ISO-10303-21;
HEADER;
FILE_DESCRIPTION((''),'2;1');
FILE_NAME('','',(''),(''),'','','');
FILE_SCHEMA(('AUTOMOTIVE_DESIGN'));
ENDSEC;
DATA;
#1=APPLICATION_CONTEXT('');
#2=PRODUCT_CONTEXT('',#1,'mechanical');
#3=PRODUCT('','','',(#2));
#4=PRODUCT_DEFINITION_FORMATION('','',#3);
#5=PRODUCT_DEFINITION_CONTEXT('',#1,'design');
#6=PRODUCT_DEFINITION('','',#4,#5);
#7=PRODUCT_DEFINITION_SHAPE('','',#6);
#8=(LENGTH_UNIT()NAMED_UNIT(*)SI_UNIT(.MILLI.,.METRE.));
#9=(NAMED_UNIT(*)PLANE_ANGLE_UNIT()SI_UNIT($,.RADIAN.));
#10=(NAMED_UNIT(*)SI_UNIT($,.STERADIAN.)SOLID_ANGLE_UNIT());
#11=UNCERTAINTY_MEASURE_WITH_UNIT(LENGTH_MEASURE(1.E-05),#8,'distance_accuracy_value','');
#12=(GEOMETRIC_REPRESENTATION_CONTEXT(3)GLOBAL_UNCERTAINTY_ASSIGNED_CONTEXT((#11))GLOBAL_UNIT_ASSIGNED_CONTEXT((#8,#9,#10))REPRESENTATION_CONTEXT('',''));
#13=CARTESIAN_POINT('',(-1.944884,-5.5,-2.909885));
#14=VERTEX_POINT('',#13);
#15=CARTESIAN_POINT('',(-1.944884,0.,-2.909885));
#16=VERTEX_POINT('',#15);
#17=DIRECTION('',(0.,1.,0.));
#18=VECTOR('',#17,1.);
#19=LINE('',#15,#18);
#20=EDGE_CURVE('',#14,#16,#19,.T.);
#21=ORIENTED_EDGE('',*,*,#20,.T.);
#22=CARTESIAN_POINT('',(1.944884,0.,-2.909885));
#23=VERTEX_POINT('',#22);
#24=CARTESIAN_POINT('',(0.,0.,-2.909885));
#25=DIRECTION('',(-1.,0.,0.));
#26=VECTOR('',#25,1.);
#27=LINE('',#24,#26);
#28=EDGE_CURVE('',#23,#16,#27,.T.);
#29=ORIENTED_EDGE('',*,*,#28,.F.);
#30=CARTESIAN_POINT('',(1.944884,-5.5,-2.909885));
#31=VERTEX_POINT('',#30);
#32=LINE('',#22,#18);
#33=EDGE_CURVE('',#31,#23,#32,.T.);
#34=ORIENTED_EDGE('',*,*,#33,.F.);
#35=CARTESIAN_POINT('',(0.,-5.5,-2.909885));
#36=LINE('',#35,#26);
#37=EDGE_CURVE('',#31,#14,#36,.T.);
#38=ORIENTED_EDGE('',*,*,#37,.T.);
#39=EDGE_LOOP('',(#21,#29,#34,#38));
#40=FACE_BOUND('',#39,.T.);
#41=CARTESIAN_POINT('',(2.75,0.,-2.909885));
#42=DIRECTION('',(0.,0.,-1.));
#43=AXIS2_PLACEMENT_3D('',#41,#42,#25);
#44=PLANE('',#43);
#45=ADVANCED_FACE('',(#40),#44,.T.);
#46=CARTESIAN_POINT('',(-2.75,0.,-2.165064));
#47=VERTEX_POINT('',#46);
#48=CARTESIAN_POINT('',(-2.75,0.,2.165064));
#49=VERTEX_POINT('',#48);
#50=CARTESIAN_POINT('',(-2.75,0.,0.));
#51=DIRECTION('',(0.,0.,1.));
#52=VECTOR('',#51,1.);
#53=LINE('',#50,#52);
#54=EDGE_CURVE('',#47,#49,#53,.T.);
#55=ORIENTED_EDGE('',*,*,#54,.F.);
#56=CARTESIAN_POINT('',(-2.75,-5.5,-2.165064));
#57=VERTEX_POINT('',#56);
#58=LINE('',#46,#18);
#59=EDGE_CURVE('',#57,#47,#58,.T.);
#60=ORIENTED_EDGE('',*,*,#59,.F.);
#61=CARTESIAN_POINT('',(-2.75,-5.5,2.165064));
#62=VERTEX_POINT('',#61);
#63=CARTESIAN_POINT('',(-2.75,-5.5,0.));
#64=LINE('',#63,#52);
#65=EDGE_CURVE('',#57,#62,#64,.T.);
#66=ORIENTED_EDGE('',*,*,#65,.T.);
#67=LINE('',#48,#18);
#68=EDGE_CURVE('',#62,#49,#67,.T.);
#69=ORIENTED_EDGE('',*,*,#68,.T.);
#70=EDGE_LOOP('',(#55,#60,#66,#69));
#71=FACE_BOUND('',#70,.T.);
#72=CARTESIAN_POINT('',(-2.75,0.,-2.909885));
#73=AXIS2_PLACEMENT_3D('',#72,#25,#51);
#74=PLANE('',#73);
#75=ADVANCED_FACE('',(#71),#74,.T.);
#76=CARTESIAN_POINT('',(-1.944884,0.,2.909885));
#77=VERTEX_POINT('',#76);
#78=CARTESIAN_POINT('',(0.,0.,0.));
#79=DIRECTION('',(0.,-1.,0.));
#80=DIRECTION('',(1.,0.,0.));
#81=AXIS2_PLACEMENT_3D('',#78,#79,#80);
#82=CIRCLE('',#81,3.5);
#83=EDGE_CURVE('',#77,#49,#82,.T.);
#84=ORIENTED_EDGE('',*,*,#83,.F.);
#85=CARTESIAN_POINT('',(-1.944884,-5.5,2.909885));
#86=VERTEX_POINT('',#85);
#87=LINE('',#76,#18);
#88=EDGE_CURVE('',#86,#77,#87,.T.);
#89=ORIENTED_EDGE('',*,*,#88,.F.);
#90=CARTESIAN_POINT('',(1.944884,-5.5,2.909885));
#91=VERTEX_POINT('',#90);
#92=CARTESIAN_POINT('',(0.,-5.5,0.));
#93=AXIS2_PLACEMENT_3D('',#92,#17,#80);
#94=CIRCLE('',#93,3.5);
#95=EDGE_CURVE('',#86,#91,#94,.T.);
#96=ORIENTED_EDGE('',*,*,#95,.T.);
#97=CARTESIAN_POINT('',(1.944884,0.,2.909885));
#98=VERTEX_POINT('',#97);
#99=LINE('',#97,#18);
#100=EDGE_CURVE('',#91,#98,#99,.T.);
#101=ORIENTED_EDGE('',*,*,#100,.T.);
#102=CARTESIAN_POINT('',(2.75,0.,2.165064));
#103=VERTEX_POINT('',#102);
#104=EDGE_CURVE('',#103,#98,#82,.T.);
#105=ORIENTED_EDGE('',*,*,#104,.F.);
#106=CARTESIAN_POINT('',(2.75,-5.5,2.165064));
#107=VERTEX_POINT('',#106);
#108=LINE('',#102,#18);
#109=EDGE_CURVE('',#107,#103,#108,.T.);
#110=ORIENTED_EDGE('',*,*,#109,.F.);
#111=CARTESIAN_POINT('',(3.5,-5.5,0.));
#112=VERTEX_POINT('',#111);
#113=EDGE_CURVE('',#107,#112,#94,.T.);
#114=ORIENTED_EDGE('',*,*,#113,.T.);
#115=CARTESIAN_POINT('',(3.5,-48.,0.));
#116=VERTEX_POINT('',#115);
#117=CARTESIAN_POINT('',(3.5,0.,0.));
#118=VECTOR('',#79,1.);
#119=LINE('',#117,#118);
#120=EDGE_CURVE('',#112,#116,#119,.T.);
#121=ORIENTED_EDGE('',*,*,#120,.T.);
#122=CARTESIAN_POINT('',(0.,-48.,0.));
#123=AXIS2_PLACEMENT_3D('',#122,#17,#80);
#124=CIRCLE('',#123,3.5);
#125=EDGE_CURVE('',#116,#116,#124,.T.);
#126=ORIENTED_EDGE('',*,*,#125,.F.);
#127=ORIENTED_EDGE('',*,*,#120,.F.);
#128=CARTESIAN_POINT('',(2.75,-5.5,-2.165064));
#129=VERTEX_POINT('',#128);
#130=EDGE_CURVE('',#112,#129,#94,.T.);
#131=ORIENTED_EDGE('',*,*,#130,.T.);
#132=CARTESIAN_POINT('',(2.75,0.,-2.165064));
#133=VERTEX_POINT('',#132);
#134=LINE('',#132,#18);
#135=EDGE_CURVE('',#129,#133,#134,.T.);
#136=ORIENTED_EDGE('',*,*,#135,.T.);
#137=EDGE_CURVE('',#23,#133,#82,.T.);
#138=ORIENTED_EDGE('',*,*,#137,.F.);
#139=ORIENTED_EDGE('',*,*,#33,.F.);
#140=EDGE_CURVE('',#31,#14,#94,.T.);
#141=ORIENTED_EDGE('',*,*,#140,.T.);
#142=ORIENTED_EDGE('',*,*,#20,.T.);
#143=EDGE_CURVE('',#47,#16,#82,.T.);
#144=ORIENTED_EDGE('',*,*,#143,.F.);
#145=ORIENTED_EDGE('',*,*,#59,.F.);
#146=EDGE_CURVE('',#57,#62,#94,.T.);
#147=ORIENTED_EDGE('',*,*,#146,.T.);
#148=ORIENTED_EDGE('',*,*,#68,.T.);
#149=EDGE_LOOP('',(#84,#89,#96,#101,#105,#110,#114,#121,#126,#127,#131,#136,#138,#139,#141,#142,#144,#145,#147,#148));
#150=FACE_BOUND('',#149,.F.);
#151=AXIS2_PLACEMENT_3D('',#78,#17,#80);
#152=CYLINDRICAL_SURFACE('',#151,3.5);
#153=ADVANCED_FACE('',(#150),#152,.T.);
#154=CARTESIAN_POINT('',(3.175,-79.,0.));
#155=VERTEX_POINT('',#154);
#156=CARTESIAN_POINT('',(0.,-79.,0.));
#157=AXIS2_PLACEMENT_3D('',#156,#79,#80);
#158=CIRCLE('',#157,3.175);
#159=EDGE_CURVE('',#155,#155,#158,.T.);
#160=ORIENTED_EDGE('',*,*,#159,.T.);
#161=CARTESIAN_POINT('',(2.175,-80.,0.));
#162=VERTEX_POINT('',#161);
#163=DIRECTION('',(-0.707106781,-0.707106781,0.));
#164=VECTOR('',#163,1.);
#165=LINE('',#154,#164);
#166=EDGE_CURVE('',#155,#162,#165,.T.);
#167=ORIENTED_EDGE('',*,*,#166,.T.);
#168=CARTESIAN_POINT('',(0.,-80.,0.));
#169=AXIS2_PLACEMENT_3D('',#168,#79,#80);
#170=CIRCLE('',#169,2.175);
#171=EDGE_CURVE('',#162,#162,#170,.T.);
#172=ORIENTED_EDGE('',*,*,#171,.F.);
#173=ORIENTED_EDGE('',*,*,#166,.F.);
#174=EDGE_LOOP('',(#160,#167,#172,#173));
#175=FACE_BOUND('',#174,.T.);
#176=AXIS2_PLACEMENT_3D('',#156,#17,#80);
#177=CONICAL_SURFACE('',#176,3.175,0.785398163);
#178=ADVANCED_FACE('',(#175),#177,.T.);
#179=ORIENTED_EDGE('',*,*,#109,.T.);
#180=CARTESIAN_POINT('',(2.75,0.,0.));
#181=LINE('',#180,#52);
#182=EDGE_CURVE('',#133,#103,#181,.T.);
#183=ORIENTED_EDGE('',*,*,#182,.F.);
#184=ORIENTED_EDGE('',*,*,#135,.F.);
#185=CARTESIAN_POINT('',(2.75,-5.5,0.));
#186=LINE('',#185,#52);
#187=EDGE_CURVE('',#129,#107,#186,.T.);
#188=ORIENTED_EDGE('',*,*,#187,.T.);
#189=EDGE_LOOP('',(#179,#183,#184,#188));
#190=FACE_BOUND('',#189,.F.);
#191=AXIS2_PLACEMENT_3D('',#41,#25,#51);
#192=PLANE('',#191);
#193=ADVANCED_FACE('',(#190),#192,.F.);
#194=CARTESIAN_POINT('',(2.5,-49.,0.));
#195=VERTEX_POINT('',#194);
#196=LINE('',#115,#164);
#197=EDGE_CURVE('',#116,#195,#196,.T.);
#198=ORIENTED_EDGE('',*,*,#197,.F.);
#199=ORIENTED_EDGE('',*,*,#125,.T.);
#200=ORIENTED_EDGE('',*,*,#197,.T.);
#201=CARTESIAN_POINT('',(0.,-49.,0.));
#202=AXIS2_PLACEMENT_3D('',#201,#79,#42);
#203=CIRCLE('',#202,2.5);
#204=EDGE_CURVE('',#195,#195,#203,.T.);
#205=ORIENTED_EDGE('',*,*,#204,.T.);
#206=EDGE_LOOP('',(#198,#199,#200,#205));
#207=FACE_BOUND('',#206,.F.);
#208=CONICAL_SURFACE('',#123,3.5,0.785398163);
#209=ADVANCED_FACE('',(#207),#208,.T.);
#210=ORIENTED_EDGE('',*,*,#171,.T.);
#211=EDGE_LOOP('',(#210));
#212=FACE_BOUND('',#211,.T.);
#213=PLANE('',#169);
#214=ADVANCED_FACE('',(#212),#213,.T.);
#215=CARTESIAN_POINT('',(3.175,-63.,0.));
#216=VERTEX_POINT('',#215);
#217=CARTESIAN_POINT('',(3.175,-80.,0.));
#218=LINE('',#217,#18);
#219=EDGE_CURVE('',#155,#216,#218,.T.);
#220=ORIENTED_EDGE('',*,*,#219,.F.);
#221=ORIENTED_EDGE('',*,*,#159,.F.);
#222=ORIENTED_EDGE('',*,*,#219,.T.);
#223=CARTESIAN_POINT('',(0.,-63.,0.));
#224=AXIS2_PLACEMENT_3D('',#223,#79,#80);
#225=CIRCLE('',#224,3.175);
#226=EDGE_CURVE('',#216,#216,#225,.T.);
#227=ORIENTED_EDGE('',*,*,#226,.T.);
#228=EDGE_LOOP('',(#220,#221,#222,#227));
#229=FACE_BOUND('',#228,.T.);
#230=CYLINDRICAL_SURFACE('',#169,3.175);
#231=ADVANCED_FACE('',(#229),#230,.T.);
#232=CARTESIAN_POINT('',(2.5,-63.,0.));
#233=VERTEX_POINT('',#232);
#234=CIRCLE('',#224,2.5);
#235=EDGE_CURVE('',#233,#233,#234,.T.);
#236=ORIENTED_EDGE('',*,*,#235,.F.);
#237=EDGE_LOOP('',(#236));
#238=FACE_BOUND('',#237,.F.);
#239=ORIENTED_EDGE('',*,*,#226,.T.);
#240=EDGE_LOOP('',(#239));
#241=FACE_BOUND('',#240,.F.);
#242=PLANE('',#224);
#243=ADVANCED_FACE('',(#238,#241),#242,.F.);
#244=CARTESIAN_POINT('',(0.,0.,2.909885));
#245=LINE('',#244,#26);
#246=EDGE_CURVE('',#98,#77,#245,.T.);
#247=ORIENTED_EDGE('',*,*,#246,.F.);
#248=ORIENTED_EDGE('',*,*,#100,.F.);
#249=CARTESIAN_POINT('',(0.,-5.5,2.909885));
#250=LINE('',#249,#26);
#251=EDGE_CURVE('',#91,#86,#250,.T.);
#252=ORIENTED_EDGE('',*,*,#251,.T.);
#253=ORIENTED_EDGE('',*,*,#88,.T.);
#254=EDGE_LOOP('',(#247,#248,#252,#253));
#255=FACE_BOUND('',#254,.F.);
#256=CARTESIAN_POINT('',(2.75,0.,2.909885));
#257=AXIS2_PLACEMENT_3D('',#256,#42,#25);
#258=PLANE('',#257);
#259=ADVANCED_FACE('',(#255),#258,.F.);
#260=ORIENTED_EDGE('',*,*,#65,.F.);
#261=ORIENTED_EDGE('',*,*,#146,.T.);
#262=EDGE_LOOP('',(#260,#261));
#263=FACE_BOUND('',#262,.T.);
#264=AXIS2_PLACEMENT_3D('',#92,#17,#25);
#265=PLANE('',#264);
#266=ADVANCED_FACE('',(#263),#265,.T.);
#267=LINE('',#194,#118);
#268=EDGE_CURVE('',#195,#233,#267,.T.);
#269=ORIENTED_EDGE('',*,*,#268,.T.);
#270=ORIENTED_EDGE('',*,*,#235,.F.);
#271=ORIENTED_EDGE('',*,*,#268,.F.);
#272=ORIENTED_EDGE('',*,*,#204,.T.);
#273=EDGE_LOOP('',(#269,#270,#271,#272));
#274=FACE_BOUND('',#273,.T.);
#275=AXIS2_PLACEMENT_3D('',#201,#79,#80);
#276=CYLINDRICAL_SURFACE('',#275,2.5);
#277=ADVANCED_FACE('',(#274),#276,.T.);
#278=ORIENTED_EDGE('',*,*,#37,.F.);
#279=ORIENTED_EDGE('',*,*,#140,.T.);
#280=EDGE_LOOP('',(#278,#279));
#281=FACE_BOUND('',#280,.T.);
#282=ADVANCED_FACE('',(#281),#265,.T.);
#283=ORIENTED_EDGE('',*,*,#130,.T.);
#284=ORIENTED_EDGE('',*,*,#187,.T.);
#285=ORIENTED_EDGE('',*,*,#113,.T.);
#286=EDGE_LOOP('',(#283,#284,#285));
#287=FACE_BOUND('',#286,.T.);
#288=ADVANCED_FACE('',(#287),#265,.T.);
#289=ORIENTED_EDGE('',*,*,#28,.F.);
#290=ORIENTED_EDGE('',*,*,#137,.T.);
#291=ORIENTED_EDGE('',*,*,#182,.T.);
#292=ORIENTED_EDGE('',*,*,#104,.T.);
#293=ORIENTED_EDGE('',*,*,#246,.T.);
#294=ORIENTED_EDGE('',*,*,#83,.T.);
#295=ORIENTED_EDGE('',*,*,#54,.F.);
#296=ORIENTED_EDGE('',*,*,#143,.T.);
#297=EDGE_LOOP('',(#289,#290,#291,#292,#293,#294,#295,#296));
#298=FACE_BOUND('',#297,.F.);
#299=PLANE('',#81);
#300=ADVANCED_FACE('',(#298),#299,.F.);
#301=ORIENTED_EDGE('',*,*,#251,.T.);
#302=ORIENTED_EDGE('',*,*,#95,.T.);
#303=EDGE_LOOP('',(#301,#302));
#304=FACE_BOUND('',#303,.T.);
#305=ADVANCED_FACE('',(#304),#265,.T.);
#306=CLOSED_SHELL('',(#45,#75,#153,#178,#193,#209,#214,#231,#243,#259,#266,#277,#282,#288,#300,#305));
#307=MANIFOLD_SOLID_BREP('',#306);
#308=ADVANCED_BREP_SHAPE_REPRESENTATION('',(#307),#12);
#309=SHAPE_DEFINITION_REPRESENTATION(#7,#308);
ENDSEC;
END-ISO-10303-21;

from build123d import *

# Parameters (mm, degrees)
F0_R        = 3.5
F1_DEPTH    = 80
F2_R        = 6.3298520118
F2_R_2      = 2.5
F3_DEPTH    = 30
F4_S5_R     = 2.5
F4_T6_DEPTH = 7
F5_R        = 3.175
F6_DEPTH    = 17
F7_SIZE     = 1
F8_W        = 9.7203729674
F8_H        = 8.019306697
F8_W_2      = 5.5
F8_H_2      = 5.8197690165
F9_DEPTH    = 5.5


# Not quite as in the source:
# - a fillet or chamfer that OpenCascade refuses, or shapes differently, is made with other operations: its cross-section is extruded or revolved along the edge and cut away or added


with BuildPart() as f1:
    # F0 (on Front) → F1 (new body)
    with BuildSketch(Plane.XZ):
        Circle(F0_R)
    extrude(amount=F1_DEPTH)

    # F2 (on face) → F3 (cut)
    with BuildSketch(Plane.XZ.offset(80)):
        Circle(F2_R)
        Circle(F2_R_2, mode=Mode.SUBTRACT)
    extrude(amount=-F3_DEPTH, mode=Mode.SUBTRACT)

    # F4: chamfer of 2 on 1 edges, made by hand


with BuildPart() as f4_tool2:
    # F4_s3 → F4_t4 (revolve)
    with BuildSketch(Plane.XY):
        Polygon((3.5, -48), (1.5, -50), (3.5, -50), align=None)
    revolve(axis=Axis((0, -50, 0), (0, 1, 0)))

    # F4_s5 → F4_t6 (cut, symmetric)
    with BuildSketch(Plane.XZ.offset(49)):
        Circle(F4_S5_R)
    extrude(amount=F4_T6_DEPTH, both=True, mode=Mode.SUBTRACT)


with BuildPart() as f1_1:
    add(f1.part)

    # F4_t1: cut F4_tool2
    add(f4_tool2.part, mode=Mode.SUBTRACT)

    # F5 (on face) → F6 (join)
    with BuildSketch(Plane.XZ.offset(80)):
        Circle(F5_R)
    extrude(amount=-F6_DEPTH)

    # F7
    f7_edges = [f1_1.edges().sort_by_distance(p)[0] for p in [
        (-3.175, -80, 0),
    ]]
    chamfer(f7_edges, length=F7_SIZE)

    # F8 (on face) → F9 (cut)
    with BuildSketch(Plane(origin=(0, 0, 0), x_dir=(-1, 0, 0), z_dir=(0, 1, 0))):
        Rectangle(F8_W, F8_H)
        Rectangle(F8_W_2, F8_H_2, mode=Mode.SUBTRACT)
    extrude(amount=-F9_DEPTH, mode=Mode.SUBTRACT)


solid = f1_1.part
